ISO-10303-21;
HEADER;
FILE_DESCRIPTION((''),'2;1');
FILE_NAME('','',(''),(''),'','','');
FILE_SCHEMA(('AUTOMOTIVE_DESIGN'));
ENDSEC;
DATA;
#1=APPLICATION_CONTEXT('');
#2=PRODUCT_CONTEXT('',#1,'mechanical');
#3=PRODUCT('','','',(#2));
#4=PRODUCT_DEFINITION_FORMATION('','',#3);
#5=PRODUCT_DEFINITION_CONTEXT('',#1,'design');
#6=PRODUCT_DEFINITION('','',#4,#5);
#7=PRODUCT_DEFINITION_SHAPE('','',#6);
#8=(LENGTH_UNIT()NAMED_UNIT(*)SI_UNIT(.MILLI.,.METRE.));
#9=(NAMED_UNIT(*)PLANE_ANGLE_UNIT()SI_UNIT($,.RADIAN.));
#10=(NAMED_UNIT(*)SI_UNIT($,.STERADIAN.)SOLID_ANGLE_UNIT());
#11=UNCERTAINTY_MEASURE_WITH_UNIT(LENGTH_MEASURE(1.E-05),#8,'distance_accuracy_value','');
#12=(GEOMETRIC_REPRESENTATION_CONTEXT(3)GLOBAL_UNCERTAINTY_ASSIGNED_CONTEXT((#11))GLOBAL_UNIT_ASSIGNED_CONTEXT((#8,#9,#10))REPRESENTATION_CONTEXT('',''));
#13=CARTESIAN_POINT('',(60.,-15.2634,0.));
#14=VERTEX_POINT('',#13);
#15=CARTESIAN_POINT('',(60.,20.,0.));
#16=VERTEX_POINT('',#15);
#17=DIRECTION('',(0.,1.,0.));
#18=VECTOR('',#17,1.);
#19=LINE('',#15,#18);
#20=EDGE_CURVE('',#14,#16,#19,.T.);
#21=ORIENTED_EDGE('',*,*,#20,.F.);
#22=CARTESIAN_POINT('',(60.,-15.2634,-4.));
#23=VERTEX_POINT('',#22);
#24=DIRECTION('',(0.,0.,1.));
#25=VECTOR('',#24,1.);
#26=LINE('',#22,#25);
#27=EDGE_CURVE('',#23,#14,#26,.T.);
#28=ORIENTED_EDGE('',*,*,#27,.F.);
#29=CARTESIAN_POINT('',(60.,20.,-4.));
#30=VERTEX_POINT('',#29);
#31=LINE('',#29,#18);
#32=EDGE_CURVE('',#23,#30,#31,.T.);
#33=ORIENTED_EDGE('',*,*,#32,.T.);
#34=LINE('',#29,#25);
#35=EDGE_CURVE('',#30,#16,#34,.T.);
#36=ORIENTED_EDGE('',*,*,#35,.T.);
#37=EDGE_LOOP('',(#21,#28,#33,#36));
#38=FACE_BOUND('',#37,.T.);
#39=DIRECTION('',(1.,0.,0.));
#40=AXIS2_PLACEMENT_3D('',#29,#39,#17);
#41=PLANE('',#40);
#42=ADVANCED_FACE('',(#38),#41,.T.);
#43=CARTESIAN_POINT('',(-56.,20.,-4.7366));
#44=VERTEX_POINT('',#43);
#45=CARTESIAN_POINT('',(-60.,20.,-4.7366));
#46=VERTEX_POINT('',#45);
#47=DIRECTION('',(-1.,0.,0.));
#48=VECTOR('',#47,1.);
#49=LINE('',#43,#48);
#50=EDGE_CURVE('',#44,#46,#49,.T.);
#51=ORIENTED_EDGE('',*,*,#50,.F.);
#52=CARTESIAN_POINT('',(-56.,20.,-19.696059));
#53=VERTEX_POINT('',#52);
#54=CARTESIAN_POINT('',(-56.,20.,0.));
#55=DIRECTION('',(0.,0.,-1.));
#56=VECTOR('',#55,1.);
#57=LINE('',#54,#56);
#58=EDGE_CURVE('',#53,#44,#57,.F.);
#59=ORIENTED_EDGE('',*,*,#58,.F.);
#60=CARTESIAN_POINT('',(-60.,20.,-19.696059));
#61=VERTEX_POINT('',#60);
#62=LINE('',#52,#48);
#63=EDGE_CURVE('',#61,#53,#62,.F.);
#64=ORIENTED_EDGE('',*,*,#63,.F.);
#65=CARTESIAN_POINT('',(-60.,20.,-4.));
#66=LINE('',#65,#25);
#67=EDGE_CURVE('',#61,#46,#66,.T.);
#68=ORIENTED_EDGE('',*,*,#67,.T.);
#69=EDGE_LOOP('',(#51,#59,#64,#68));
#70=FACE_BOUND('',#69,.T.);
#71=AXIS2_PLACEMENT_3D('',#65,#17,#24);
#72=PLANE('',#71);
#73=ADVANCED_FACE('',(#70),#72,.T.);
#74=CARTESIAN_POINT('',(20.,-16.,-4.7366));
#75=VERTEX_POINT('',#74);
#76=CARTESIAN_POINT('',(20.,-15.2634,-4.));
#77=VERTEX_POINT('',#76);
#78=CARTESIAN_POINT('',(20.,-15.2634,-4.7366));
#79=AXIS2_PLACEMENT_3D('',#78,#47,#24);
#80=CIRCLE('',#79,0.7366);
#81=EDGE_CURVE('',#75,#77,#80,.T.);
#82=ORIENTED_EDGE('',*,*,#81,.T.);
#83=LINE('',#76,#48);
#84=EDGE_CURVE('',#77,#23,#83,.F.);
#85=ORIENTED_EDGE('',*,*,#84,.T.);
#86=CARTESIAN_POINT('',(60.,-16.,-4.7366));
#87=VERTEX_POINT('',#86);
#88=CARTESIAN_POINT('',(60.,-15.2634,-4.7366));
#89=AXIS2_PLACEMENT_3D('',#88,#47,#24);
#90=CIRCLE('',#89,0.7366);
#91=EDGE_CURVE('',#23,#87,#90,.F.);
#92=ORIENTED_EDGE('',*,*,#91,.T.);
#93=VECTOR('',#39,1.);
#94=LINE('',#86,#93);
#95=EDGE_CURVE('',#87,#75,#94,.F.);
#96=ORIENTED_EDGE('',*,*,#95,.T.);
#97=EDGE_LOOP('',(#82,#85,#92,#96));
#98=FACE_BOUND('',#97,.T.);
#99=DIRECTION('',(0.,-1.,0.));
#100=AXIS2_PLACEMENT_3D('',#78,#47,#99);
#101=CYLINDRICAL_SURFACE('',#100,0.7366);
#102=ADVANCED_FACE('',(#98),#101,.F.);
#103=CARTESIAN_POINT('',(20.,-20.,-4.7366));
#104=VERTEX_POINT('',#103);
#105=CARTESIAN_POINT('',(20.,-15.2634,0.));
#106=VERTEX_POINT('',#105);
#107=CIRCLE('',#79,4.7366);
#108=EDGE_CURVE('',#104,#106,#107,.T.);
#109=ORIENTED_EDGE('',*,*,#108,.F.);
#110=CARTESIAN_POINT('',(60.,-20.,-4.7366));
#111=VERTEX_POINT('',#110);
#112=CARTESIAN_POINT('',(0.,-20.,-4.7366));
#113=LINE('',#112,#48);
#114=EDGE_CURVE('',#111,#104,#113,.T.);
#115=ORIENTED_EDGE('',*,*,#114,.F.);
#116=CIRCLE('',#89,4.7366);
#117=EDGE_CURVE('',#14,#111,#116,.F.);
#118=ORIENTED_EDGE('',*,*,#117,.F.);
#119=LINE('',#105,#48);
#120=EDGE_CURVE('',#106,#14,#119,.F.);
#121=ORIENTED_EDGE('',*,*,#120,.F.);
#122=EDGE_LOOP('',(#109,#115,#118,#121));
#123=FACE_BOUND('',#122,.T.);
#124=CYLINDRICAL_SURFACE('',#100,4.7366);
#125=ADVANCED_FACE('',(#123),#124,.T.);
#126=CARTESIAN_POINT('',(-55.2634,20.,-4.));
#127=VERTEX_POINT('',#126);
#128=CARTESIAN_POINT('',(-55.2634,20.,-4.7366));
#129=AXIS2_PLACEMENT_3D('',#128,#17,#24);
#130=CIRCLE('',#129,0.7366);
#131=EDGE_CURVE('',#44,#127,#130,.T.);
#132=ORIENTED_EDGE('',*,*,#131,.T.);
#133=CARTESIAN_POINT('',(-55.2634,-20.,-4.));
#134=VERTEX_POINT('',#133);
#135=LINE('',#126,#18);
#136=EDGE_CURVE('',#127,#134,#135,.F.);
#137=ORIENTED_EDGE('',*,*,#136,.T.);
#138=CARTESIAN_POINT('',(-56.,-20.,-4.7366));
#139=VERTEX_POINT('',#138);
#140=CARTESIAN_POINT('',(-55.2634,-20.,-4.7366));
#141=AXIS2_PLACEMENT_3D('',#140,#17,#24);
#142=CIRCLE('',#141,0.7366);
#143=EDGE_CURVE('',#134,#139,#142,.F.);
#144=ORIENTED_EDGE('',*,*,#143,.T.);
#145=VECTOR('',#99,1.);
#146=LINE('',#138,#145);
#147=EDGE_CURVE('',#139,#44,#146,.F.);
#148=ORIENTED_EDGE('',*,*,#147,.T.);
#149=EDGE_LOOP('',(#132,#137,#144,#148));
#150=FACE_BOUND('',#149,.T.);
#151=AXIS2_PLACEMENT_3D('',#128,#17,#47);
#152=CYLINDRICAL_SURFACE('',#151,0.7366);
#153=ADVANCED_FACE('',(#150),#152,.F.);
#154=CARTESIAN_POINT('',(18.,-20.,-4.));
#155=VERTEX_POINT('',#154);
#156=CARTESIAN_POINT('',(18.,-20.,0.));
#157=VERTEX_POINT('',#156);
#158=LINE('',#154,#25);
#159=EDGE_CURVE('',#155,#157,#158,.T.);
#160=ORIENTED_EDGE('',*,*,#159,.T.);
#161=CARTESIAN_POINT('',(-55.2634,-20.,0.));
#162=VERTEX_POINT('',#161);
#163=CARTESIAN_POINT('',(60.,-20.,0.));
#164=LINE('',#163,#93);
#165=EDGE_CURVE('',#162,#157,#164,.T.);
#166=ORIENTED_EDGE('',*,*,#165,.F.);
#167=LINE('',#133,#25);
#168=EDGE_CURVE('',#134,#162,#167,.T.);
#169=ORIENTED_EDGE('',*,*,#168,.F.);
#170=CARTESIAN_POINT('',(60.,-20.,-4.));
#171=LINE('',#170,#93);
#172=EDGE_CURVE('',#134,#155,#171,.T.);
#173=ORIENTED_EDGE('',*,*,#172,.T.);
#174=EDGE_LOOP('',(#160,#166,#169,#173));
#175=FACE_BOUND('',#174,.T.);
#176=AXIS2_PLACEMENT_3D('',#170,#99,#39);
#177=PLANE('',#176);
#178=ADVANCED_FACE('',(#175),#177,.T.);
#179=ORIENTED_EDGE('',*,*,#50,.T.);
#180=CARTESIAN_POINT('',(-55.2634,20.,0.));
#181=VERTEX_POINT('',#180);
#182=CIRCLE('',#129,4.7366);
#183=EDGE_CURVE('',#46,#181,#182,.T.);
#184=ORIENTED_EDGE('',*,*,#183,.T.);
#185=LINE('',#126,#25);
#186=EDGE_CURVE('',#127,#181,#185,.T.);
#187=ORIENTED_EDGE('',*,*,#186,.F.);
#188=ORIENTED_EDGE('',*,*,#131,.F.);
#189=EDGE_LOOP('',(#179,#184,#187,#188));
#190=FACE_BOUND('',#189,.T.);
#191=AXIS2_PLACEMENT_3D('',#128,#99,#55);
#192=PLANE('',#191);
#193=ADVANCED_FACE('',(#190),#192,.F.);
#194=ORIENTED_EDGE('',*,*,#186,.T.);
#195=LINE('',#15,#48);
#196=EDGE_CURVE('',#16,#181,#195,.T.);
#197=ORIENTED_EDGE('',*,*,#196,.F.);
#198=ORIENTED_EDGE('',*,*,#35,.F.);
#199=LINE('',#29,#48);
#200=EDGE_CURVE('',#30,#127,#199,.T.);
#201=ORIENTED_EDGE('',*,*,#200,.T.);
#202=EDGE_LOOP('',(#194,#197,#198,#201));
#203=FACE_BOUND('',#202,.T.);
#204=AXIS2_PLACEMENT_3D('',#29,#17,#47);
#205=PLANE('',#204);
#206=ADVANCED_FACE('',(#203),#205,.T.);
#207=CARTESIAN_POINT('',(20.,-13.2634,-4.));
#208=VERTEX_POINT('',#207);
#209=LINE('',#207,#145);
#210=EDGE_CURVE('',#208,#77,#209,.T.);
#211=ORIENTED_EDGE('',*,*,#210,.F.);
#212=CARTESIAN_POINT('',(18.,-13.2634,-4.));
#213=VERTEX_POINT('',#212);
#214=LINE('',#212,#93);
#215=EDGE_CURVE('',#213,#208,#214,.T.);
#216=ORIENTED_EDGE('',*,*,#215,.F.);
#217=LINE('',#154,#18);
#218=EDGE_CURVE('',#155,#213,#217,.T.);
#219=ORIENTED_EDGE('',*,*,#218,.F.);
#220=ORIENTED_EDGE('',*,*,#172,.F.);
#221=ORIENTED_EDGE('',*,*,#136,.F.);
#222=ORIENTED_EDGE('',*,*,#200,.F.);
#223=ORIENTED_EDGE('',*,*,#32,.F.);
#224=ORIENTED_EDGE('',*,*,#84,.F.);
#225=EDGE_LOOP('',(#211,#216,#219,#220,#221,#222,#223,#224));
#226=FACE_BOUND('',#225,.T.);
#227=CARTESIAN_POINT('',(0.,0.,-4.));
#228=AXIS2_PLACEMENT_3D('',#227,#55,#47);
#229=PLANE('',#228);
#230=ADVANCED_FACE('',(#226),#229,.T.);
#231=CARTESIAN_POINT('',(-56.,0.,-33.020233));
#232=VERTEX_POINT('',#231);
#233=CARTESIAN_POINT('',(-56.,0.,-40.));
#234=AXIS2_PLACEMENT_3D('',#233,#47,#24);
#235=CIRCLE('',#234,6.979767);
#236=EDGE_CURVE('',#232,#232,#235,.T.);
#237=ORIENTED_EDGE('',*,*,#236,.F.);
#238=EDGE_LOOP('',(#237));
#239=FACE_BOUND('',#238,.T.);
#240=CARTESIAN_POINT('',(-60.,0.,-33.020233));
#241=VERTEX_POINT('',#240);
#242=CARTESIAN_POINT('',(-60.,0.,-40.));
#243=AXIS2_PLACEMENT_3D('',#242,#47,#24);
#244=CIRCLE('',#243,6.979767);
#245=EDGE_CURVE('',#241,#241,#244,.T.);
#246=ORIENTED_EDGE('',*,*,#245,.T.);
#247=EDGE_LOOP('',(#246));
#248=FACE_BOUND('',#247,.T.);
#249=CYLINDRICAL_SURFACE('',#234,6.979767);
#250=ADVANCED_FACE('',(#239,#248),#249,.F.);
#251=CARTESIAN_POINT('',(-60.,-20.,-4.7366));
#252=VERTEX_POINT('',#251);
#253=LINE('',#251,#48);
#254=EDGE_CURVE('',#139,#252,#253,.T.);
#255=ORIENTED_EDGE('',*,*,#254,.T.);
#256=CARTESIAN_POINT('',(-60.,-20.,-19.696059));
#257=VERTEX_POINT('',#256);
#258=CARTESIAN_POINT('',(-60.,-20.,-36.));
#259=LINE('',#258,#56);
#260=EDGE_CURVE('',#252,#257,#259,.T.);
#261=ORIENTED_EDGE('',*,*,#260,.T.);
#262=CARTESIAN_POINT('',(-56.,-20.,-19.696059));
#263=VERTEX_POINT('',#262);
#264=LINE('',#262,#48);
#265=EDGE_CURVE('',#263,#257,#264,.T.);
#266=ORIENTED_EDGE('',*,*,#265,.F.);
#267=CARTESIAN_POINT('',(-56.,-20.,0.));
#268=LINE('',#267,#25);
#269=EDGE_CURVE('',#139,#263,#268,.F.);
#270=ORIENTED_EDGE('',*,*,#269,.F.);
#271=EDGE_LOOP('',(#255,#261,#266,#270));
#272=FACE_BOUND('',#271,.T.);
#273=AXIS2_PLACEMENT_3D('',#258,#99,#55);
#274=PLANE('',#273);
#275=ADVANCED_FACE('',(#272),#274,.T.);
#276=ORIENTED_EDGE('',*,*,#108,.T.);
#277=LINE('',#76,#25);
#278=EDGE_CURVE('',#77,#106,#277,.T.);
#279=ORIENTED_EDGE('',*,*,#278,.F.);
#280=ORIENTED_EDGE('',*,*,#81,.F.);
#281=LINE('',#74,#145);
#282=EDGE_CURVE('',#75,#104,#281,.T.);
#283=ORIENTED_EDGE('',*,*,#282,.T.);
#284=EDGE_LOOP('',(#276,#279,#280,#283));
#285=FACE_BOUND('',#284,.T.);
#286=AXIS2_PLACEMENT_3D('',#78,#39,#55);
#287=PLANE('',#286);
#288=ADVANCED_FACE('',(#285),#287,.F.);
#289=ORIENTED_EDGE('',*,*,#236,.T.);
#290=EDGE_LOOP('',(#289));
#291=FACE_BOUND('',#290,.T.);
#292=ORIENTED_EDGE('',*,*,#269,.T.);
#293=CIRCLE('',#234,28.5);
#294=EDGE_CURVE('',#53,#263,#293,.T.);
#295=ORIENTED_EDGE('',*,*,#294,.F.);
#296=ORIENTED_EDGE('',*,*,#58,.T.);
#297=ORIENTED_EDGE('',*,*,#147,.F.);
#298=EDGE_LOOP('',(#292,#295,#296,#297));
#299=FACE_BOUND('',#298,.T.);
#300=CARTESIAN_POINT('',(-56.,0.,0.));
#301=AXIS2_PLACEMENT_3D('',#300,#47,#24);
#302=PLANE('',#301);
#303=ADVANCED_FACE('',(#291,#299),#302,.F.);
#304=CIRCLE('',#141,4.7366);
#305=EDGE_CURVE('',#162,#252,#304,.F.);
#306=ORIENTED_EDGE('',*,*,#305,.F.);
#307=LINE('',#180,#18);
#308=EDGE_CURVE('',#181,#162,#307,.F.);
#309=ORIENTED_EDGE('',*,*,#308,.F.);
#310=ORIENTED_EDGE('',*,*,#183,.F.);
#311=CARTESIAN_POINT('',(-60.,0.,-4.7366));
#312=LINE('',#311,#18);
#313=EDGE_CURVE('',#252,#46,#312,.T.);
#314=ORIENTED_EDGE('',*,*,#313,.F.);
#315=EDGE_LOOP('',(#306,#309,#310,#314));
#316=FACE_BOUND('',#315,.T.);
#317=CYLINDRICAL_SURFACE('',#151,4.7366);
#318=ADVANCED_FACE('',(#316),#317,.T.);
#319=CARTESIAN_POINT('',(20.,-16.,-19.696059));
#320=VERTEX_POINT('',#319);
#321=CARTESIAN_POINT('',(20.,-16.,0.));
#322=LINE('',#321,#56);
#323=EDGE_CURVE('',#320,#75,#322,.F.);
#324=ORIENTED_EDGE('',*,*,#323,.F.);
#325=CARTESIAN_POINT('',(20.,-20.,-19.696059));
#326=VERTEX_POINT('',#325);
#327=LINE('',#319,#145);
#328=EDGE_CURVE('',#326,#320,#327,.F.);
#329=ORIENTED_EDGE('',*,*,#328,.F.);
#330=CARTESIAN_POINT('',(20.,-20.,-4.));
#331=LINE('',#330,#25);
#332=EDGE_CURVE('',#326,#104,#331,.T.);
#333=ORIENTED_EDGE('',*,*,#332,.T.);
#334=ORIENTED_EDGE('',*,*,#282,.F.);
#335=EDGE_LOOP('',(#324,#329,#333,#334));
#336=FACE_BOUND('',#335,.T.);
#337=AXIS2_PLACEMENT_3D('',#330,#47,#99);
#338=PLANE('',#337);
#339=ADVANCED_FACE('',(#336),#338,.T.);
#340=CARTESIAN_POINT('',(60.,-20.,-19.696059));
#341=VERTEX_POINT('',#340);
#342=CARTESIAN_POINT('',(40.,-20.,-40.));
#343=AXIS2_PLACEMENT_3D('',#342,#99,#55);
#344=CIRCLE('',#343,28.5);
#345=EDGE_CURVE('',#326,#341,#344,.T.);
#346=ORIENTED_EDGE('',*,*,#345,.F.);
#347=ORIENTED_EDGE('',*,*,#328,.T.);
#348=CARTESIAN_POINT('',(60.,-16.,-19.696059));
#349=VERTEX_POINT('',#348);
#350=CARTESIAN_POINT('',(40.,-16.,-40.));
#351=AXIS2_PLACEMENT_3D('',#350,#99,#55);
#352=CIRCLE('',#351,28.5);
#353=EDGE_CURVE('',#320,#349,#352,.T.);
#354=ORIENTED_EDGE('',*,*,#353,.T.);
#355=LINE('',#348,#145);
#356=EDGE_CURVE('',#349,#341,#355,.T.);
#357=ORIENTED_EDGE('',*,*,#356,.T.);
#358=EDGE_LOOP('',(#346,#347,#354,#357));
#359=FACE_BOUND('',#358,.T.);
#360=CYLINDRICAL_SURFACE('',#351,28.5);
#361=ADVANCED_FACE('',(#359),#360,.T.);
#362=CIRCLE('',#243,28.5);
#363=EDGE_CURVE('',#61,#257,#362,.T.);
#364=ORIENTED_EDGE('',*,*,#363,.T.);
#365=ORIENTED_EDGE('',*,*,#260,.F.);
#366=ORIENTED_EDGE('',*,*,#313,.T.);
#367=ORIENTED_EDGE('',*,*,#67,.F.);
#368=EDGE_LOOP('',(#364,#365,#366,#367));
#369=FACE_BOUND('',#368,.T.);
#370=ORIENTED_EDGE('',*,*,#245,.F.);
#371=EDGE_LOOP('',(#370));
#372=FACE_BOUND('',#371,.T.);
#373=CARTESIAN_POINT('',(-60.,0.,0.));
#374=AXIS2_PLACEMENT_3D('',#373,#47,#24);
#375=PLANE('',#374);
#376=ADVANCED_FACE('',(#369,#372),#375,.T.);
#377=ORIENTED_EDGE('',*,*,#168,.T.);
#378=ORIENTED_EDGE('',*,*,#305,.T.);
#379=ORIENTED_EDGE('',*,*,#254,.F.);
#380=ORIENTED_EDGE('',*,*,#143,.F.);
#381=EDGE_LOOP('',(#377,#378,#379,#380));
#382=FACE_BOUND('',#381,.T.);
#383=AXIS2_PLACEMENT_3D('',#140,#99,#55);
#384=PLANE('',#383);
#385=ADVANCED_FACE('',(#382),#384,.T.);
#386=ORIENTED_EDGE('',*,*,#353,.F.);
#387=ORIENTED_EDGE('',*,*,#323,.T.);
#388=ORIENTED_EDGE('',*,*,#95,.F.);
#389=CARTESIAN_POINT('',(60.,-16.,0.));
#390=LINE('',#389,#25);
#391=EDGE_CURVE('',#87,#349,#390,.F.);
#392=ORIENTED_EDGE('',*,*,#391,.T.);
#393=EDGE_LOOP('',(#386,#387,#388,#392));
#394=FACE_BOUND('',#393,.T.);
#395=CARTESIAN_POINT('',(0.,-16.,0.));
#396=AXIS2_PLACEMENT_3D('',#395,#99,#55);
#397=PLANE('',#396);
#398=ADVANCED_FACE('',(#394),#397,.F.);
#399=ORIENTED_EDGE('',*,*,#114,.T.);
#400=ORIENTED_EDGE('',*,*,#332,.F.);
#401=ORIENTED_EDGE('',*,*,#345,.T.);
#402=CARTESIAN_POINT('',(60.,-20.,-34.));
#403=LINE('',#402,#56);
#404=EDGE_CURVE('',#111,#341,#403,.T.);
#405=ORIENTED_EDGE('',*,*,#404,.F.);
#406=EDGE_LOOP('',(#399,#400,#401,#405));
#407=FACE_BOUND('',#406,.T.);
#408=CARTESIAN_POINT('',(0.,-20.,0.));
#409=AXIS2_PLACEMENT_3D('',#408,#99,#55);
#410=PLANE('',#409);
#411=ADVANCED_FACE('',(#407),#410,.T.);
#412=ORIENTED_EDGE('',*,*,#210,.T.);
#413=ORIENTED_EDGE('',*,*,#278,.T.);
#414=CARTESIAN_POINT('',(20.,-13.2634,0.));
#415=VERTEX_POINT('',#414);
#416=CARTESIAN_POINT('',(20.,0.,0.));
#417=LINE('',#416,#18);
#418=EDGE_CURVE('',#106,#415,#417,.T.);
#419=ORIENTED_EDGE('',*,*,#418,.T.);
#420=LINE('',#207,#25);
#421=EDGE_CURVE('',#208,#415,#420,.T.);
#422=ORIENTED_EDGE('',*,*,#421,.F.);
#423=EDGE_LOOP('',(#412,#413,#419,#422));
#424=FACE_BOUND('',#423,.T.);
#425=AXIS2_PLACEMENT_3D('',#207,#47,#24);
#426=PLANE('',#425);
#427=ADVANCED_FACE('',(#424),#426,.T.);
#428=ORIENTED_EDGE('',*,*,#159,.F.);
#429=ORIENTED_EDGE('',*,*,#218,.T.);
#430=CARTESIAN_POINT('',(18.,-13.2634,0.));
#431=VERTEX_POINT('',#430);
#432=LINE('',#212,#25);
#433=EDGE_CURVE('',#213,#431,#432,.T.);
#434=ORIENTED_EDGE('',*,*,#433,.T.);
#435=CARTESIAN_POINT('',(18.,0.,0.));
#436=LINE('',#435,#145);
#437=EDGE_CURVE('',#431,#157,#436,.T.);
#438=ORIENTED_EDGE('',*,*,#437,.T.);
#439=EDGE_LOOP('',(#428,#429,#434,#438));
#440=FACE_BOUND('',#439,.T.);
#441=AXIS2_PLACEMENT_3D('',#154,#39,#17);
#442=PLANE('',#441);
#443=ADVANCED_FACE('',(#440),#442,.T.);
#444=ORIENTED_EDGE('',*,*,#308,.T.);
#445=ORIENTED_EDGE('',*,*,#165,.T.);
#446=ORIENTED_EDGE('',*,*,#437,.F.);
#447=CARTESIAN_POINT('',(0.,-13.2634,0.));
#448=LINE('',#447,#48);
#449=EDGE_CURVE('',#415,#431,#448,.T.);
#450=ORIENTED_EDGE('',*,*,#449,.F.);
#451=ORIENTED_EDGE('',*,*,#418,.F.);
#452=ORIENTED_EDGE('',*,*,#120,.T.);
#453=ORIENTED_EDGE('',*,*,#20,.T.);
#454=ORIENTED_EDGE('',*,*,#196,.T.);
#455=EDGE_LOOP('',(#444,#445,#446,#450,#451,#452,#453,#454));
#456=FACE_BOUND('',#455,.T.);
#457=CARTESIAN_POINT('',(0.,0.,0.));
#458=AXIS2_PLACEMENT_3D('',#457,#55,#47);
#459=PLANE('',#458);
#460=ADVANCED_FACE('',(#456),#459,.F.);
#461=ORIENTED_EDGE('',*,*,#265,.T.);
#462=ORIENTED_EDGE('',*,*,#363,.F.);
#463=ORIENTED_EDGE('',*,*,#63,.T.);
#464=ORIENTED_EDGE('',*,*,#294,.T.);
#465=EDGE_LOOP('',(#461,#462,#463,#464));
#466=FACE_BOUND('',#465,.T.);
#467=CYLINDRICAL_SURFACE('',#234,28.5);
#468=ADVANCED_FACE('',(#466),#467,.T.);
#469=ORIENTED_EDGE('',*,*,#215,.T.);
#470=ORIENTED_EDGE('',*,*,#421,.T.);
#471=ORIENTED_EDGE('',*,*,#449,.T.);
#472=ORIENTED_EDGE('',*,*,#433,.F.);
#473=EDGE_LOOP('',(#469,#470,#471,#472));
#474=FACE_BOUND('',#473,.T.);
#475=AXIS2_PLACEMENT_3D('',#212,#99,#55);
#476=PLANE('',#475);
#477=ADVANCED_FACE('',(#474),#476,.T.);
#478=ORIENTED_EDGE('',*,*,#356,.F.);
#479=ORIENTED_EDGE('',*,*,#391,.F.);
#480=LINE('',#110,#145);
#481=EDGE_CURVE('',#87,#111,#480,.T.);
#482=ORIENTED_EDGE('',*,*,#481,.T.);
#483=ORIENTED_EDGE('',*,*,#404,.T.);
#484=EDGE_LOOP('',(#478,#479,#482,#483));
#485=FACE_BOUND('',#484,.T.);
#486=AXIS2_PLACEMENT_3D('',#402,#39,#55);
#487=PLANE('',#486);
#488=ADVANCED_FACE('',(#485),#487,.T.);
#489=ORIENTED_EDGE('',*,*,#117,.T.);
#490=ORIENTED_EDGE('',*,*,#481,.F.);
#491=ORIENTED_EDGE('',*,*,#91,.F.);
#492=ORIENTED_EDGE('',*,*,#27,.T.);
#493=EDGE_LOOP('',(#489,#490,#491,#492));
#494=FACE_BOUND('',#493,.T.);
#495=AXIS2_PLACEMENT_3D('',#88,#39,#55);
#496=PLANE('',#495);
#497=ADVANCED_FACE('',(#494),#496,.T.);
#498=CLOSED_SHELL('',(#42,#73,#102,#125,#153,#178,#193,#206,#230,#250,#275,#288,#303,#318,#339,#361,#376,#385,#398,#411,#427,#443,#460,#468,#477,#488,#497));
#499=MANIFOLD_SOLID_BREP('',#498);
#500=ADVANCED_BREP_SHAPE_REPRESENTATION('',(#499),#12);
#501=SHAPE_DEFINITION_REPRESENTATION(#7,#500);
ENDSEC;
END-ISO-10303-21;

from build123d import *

# Parameters (mm, degrees)
SKETCH_1_W                        = 120
SKETCH_1_H                        = 40
SM_BASE_FLANGE_1_DEPTH            = 4
SM_EDGE_FLANGE_1_STRIP_W          = 17.4732
SM_EDGE_FLANGE_1_STRIP_H          = 4
SM_EDGE_FLANGE_1_STRIP_CUT_DEPTH  = 40
SM_EDGE_FLANGE_1_DEPTH            = 40
SKETCH_12_R                       = 28.5
EXTRUDE_1_DEPTH                   = 4
SKETCH_13_R                       = 6.979767345
CUT_EXTRUDE_2_DEPTH               = 4
SM_EDGE_FLANGE_2_STRIP_W          = 17.4732
SM_EDGE_FLANGE_2_STRIP_H          = 4
SM_EDGE_FLANGE_2_STRIP_CUT_DEPTH  = 40
SM_EDGE_FLANGE_2_RELIEF_W         = 19.4732
SM_EDGE_FLANGE_2_RELIEF_H         = 2
SM_EDGE_FLANGE_2_RELIEF_CUT_DEPTH = 4
SM_EDGE_FLANGE_2_DEPTH            = 40
SKETCH_17_R                       = 28.5
EXTRUDE_2_DEPTH                   = 4


# Sheet-metal steps are written as plain solids
with BuildPart() as part:
    # Sketch 1 → 基体-法兰1 (new body)
    with BuildSketch(Plane.XY):
        Rectangle(SKETCH_1_W, SKETCH_1_H)
    extrude(amount=-SM_BASE_FLANGE_1_DEPTH)

    # 边线-法兰1 strip (across the edge) → 边线-法兰1 strip cut (cut)
    with BuildSketch(Plane(origin=(-60, -20, -4), x_dir=(1, 0, 0), z_dir=(0, 1, 0))):
        with Locations((-4, -2)):
            Rectangle(SM_EDGE_FLANGE_1_STRIP_W, SM_EDGE_FLANGE_1_STRIP_H)
    extrude(amount=SM_EDGE_FLANGE_1_STRIP_CUT_DEPTH, mode=Mode.SUBTRACT)

    # 边线-法兰1 section (across the edge) → 边线-法兰1 (add)
    with BuildSketch(Plane(origin=(-60, -20, -4), x_dir=(1, 0, 0), z_dir=(0, 1, 0))):
        with BuildLine():
            Line((0, 0.7366), (0, 32))
            Line((0, 32), (4, 32))
            Line((4, 32), (4, 0.7366))
            ThreePointArc((4, 0.7366), (4.215745145, 0.215745145), (4.7366, 0))
            Line((4.7366, 0), (4.7366, -4))
            ThreePointArc((4.7366, -4), (1.38731802, -2.61268198), (0, 0.7366))
        make_face()
    extrude(amount=SM_EDGE_FLANGE_1_DEPTH)

    # 草图12 → 凸台-拉伸1 (add)
    with BuildSketch(Plane.ZY.offset(60)):
        with Locations((-40, 0)):
            Circle(SKETCH_12_R)
    extrude(amount=-EXTRUDE_1_DEPTH)

    # 草图13 → 切除-拉伸2 (cut)
    with BuildSketch(Plane.ZY.offset(60)):
        with Locations((-40, 0)):
            Circle(SKETCH_13_R)
    extrude(amount=-CUT_EXTRUDE_2_DEPTH, mode=Mode.SUBTRACT)

    # 边线-法兰2 strip (across the edge) → 边线-法兰2 strip cut (cut)
    with BuildSketch(Plane(origin=(60, -20, -4), x_dir=(0, 1, 0), z_dir=(-1, 0, 0))):
        with Locations((-4, -2)):
            Rectangle(SM_EDGE_FLANGE_2_STRIP_W, SM_EDGE_FLANGE_2_STRIP_H)
    extrude(amount=SM_EDGE_FLANGE_2_STRIP_CUT_DEPTH, mode=Mode.SUBTRACT)

    # 边线-法兰2 relief (on the sheet) → 边线-法兰2 relief cut (cut)
    with BuildSketch(Plane(origin=(60, -15.2634, -4), x_dir=(0, 1, 0), z_dir=(0, 0, -1))):
        with Locations((-7.7366, -41)):
            Rectangle(SM_EDGE_FLANGE_2_RELIEF_W, SM_EDGE_FLANGE_2_RELIEF_H)
    extrude(amount=-SM_EDGE_FLANGE_2_RELIEF_CUT_DEPTH, mode=Mode.SUBTRACT)

    # 边线-法兰2 section (across the edge) → 边线-法兰2 (add)
    with BuildSketch(Plane(origin=(60, -20, -4), x_dir=(0, 1, 0), z_dir=(-1, 0, 0))):
        with BuildLine():
            Line((0, 0.7366), (0, 30))
            Line((0, 30), (4, 30))
            Line((4, 30), (4, 0.7366))
            ThreePointArc((4, 0.7366), (4.215745145, 0.215745145), (4.7366, 0))
            Line((4.7366, 0), (4.7366, -4))
            ThreePointArc((4.7366, -4), (1.38731802, -2.61268198), (0, 0.7366))
        make_face()
    extrude(amount=SM_EDGE_FLANGE_2_DEPTH)

    # 草图17 → 凸台-拉伸2 (add)
    with BuildSketch(Plane.XZ.offset(20)):
        with Locations((40, -40)):
            Circle(SKETCH_17_R)
    extrude(amount=-EXTRUDE_2_DEPTH)


solid = part.part
